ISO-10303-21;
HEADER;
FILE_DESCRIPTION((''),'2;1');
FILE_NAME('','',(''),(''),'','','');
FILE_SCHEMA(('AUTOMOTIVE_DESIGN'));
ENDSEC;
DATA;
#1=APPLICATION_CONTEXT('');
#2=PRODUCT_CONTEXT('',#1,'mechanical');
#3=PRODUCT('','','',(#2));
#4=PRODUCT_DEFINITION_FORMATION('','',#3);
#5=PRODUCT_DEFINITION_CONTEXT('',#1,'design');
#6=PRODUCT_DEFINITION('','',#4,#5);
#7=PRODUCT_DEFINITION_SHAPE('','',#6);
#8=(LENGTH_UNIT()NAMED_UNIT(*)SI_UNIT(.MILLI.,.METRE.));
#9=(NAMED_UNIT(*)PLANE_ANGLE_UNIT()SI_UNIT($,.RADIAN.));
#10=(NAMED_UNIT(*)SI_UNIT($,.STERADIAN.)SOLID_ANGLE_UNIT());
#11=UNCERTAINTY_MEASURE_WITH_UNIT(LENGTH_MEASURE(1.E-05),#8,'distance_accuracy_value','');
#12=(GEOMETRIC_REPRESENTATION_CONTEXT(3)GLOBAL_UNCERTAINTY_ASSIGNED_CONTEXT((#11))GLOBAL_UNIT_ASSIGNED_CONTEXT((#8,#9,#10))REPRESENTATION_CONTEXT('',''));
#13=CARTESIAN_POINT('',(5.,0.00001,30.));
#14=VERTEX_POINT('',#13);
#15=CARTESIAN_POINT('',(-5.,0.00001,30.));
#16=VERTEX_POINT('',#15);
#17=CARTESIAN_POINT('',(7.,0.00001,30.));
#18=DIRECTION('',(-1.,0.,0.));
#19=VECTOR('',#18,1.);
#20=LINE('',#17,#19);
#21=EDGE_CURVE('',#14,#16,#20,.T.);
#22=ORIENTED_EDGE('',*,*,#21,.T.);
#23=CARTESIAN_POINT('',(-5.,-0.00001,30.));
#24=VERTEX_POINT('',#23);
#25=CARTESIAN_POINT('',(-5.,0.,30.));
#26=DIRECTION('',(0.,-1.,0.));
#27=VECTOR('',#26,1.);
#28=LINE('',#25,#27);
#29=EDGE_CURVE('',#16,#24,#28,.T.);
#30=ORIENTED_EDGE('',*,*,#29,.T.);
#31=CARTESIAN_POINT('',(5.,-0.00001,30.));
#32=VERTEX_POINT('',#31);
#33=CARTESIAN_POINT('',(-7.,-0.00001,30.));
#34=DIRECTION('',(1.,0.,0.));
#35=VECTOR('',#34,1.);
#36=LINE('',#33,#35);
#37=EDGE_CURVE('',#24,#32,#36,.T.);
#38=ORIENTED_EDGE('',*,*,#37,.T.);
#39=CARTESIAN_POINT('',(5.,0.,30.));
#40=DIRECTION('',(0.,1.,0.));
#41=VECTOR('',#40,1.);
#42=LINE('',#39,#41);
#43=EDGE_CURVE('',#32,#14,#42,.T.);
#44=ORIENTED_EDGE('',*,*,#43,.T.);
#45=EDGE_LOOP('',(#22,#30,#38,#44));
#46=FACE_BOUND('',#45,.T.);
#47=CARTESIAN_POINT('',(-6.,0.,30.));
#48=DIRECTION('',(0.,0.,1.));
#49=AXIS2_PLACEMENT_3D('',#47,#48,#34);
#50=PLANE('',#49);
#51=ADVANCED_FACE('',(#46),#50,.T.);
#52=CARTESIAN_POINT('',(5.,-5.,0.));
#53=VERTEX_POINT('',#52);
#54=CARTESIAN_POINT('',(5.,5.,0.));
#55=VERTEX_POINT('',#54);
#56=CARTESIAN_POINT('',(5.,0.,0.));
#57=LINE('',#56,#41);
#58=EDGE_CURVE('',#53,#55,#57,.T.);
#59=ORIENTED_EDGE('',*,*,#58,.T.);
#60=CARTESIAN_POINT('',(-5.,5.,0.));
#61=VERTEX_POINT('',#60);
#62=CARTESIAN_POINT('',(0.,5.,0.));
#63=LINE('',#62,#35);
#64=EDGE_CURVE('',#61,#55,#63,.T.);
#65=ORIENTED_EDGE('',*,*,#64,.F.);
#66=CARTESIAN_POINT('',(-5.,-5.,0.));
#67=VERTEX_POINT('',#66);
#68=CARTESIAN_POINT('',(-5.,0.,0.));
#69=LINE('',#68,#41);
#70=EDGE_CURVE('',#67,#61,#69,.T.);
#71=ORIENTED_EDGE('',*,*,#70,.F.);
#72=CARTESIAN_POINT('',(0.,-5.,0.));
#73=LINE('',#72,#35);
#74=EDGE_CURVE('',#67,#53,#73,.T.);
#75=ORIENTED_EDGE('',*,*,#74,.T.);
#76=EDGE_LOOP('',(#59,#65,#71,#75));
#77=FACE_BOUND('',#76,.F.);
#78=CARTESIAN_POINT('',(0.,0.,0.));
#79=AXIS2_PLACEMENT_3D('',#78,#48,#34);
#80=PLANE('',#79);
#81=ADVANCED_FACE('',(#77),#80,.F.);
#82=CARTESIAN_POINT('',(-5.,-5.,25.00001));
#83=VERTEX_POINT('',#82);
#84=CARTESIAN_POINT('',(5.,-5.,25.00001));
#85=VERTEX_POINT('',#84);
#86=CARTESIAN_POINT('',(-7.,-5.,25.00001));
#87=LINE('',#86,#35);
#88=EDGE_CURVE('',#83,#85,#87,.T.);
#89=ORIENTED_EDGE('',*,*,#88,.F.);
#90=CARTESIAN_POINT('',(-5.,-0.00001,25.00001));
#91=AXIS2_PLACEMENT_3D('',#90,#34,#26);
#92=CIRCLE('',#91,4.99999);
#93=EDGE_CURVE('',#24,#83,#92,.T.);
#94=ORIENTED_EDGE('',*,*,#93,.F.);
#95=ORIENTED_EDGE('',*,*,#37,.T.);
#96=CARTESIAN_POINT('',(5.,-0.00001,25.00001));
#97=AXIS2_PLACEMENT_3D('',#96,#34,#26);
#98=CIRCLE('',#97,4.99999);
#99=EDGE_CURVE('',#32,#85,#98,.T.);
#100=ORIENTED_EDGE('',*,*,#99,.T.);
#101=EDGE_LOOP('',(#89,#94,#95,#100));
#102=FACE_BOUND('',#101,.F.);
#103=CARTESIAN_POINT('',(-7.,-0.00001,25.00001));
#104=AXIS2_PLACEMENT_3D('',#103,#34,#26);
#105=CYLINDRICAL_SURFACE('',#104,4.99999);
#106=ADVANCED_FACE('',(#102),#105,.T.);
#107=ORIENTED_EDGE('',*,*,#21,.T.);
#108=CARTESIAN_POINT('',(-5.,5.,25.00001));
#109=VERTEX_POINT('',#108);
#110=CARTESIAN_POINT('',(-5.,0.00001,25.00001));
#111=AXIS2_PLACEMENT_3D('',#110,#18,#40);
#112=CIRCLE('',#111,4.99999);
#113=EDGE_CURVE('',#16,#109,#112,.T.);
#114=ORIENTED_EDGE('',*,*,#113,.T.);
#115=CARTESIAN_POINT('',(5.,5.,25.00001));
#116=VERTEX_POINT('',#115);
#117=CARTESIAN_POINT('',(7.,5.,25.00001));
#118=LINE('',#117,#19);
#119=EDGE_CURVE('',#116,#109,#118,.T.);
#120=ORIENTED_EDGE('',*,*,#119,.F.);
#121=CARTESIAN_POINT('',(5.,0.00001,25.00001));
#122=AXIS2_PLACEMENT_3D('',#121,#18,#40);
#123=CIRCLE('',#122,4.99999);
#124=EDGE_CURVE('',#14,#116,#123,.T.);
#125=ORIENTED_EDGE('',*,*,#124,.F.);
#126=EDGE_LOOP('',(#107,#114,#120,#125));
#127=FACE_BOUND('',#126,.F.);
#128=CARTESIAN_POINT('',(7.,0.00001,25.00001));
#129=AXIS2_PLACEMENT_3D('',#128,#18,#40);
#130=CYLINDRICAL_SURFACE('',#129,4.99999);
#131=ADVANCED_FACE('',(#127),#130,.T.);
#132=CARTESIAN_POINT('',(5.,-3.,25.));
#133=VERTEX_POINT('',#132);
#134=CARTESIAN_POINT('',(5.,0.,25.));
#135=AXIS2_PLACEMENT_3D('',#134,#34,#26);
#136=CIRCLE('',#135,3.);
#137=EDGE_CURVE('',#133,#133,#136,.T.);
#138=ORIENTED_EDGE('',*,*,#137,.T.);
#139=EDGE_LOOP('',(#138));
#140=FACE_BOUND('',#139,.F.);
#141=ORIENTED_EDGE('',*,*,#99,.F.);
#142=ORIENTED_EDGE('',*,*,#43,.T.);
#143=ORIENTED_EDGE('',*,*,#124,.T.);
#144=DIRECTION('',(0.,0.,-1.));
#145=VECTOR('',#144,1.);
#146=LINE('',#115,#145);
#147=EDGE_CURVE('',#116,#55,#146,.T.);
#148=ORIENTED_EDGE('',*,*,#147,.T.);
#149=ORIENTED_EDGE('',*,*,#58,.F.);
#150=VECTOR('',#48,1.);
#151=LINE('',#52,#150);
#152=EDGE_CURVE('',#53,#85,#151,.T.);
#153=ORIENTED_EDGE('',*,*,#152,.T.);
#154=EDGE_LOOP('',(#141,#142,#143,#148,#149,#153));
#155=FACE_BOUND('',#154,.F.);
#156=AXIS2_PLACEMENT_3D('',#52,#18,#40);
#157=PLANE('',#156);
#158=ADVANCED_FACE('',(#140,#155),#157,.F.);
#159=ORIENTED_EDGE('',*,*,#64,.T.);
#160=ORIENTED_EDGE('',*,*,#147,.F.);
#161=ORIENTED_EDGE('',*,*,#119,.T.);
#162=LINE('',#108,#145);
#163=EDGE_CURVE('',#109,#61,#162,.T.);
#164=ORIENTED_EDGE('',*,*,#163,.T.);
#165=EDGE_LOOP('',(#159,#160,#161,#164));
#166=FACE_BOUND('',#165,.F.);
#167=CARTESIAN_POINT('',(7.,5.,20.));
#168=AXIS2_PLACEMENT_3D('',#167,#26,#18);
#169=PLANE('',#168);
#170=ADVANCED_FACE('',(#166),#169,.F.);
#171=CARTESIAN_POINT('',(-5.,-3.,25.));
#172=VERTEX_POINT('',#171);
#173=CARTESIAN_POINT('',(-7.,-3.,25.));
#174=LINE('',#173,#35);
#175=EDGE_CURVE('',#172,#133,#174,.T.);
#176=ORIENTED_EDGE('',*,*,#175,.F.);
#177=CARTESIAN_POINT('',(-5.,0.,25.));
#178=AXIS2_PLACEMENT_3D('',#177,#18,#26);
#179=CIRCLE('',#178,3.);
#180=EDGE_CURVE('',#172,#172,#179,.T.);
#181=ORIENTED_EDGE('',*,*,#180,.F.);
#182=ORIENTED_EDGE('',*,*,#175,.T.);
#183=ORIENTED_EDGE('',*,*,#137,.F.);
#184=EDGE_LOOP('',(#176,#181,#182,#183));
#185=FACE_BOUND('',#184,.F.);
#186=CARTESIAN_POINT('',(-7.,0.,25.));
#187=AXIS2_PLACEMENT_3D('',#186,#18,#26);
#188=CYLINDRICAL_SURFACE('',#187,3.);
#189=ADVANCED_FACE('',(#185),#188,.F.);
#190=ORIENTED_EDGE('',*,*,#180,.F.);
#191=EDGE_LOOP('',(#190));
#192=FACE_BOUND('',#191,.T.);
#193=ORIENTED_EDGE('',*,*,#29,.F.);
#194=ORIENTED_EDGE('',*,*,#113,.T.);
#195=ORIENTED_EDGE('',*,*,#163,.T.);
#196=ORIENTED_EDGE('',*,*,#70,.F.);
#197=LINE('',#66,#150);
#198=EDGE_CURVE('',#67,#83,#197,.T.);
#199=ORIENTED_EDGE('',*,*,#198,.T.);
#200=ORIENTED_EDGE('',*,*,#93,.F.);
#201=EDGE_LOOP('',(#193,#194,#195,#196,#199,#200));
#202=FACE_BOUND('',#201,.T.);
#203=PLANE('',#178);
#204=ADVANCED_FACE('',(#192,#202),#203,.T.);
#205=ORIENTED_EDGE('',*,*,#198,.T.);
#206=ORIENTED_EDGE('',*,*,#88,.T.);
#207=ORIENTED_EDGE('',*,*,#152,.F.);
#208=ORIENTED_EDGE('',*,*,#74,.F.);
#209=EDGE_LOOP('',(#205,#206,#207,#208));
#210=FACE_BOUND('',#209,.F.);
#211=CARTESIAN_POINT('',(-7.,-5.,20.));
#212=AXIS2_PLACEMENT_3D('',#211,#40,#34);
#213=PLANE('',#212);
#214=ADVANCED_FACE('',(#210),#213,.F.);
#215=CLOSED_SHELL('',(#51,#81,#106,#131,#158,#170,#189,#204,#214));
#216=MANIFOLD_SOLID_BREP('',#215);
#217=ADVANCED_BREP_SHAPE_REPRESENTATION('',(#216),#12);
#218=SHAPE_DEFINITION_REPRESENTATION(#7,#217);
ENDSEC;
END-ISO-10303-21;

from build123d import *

# Parameters (mm, degrees)
F0_W     = 10
F0_H     = 10
F1_DEPTH = 20
F2_W     = 2
F2_H     = 10
F2_W_2   = 10
F3_DEPTH = 10
F6_R     = 4.99999
F5_W     = 10
F5_H     = 10
F5_R     = 3
F7_DEPTH = 2
F4_W     = 10
F4_H     = 10
F4_R     = 3
F8_DEPTH = 2
F9_DEPTH = 14.001


# Not quite as in the source:
# - a fillet or chamfer is up to 0.001 mm smaller than in the source, because OpenCascade refuses the exact size


with BuildPart() as f1:
    # F0 (on Top) → F1 (new body)
    with BuildSketch(Plane.XY):
        Rectangle(F0_W, F0_H)
    extrude(amount=F1_DEPTH)

    # F2 (on face) → F3 (join)
    with BuildSketch(Plane.XY.offset(20)):
        with Locations((-6, 0)):
            Rectangle(F2_W, F2_H)
        Rectangle(F2_W_2, F2_H)
        with Locations((6, 0)):
            Rectangle(F2_W, F2_H)
    extrude(amount=F3_DEPTH)

    # F6 (radius 5 in the source; OpenCascade refuses exactly that, so slightly less here)
    f6_edges = [f1.edges().sort_by_distance(p)[0] for p in [
        (0, 5, 30),
        (0, -5, 30),
    ]]
    fillet(f6_edges, radius=F6_R)

    # F5 (on face) → F7 (cut)
    with BuildSketch(Plane.YZ.offset(7)):
        with Locations((0, 25)):
            Rectangle(F5_W, F5_H)
        with Locations((0, 25)):
            Circle(F5_R, mode=Mode.SUBTRACT)
    extrude(amount=-F7_DEPTH, mode=Mode.SUBTRACT)

    # F4 (on face) → F8 (cut)
    with BuildSketch(Plane(origin=(-7, 0, 0), x_dir=(0, -1, 0), z_dir=(-1, 0, 0))):
        with Locations((0, 25)):
            Rectangle(F4_W, F4_H)
        with Locations((0, 25)):
            Circle(F4_R, mode=Mode.SUBTRACT)
    extrude(amount=-F8_DEPTH, mode=Mode.SUBTRACT)

    # F9 (cut, through all): a face of the model
    f9_faces = [f1.faces().sort_by_distance(p)[0] for p in [
        (-7, 0, 25),
    ]]
    extrude(f9_faces, amount=-F9_DEPTH, mode=Mode.SUBTRACT)


solid = f1.part
